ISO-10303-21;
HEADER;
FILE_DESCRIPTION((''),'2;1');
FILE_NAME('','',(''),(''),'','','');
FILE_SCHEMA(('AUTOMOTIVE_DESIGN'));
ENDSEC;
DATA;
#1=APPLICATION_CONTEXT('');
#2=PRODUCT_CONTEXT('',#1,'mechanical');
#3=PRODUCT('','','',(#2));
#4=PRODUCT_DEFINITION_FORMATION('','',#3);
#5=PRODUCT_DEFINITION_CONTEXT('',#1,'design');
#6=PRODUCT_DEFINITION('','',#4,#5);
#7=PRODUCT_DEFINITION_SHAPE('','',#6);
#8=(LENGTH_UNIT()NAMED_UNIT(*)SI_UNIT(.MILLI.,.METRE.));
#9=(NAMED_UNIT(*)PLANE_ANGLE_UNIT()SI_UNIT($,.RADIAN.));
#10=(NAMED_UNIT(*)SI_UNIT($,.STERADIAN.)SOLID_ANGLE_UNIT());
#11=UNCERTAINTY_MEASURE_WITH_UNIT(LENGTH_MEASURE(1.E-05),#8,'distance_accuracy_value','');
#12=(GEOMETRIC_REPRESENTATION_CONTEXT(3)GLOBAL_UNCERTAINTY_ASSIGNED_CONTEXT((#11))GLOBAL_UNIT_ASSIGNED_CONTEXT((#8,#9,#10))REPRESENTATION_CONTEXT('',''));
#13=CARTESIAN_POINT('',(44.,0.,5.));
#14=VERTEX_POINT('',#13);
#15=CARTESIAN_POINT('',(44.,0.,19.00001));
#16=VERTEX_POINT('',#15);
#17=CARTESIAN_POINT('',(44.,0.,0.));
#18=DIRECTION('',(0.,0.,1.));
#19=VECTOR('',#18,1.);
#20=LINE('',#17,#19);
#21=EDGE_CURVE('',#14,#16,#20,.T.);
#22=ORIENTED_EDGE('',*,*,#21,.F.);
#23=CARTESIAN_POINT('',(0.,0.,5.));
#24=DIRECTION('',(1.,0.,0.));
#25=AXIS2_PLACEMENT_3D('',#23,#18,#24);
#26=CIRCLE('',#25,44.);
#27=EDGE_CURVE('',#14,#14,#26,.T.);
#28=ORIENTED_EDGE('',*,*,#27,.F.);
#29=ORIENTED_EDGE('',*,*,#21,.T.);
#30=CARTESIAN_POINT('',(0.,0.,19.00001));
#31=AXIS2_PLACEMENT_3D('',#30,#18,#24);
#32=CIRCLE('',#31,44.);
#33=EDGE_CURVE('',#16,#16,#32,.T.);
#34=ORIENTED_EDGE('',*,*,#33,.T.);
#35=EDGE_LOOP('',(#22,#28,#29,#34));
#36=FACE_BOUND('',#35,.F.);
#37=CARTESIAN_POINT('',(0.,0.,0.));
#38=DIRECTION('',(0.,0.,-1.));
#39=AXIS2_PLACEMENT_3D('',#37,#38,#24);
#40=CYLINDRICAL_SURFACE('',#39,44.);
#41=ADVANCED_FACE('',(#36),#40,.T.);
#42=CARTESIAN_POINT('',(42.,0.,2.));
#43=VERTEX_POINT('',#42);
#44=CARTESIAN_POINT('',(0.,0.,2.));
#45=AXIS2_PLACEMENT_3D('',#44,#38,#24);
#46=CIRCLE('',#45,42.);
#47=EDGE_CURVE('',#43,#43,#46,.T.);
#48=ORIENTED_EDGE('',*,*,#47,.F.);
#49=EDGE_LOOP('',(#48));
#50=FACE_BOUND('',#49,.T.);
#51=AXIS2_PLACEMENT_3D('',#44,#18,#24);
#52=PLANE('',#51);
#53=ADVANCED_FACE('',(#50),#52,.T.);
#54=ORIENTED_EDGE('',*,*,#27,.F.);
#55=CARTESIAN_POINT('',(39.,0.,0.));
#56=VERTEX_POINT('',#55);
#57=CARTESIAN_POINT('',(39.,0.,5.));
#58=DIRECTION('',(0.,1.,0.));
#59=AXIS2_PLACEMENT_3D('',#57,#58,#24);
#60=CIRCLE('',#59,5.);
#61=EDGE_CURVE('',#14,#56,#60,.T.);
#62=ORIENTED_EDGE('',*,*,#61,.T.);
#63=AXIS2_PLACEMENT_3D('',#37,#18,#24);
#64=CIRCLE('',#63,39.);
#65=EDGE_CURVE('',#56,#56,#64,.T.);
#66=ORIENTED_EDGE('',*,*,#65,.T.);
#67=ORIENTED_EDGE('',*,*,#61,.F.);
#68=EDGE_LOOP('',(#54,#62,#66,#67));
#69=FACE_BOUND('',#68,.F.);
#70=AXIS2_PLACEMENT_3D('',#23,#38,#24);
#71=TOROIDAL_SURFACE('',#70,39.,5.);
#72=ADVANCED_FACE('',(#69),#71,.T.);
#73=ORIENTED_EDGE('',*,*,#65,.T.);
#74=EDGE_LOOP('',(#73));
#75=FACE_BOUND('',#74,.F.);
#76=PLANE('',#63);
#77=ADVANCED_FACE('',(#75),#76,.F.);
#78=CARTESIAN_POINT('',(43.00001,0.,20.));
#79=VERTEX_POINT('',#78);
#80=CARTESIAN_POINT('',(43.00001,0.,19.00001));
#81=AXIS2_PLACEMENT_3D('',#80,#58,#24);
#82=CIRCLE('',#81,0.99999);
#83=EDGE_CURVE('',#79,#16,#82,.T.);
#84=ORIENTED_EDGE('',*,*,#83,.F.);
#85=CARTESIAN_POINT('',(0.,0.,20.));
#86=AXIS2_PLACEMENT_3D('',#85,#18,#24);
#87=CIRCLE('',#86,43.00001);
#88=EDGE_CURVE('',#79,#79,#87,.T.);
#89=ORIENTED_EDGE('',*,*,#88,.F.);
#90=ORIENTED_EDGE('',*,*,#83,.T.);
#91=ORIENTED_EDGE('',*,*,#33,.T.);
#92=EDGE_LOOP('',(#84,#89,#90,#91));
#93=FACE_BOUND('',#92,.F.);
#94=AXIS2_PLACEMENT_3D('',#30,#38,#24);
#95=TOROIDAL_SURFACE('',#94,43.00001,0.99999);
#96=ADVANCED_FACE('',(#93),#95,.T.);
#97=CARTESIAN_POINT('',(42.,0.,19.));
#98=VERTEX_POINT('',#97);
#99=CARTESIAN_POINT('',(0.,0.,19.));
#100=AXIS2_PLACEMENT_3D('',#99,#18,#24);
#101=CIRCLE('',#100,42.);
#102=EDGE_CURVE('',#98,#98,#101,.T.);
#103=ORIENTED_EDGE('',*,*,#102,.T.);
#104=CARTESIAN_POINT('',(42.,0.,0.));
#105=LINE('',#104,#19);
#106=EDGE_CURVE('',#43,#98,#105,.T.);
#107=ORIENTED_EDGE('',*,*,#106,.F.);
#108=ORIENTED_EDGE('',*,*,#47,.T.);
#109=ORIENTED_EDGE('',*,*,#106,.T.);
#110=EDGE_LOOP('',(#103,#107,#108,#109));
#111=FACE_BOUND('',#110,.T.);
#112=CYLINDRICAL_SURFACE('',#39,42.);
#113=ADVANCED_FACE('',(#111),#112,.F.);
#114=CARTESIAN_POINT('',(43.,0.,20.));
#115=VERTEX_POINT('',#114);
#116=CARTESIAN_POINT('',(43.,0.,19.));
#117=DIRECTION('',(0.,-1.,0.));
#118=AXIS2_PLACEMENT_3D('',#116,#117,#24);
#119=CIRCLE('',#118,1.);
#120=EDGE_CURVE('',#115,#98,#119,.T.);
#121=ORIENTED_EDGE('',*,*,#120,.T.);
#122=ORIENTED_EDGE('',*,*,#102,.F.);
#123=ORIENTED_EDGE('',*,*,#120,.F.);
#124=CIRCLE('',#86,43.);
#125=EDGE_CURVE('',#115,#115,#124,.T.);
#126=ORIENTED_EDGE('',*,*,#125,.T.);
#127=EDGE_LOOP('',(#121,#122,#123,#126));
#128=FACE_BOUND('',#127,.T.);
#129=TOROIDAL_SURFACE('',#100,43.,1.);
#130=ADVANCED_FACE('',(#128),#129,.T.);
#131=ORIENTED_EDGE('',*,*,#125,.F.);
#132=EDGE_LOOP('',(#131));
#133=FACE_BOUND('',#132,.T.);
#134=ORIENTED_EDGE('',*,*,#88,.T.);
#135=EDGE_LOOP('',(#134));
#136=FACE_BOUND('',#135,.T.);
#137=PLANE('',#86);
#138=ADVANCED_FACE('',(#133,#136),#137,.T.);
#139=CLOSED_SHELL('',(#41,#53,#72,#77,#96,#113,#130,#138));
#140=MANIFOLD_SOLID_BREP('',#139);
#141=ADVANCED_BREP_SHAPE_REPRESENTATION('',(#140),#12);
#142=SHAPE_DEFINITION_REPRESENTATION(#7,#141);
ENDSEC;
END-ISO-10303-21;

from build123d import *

# Parameters (mm, degrees)
F0_R     = 44
F1_DEPTH = 20
F2_T     = -2
F3_R     = 1
F4_R     = 0.99999
F5_R     = 5


# Not quite as in the source:
# - a fillet or chamfer is up to 0.001 mm smaller than in the source, because OpenCascade refuses the exact size


with BuildPart() as f1:
    # F0 (on Top) → F1 (new body)
    with BuildSketch(Plane.XY):
        Circle(F0_R)
    extrude(amount=F1_DEPTH)

    # F2
    f2_openings = [f1.faces().sort_by_distance(p)[0] for p in [
        (0, 0, 20),
    ]]
    offset(amount=F2_T, openings=f2_openings)

    # F3
    f3_edges = [f1.edges().sort_by_distance(p)[0] for p in [
        (-42, 0, 20),
    ]]
    fillet(f3_edges, radius=F3_R)

    # F4 (radius 1 in the source; OpenCascade refuses exactly that, so slightly less here)
    f4_edges = [f1.edges().sort_by_distance(p)[0] for p in [
        (-44, 0, 20),
    ]]
    fillet(f4_edges, radius=F4_R)

    # F5
    f5_edges = [f1.edges().sort_by_distance(p)[0] for p in [
        (-44, 0, 0),
    ]]
    fillet(f5_edges, radius=F5_R)


solid = f1.part
